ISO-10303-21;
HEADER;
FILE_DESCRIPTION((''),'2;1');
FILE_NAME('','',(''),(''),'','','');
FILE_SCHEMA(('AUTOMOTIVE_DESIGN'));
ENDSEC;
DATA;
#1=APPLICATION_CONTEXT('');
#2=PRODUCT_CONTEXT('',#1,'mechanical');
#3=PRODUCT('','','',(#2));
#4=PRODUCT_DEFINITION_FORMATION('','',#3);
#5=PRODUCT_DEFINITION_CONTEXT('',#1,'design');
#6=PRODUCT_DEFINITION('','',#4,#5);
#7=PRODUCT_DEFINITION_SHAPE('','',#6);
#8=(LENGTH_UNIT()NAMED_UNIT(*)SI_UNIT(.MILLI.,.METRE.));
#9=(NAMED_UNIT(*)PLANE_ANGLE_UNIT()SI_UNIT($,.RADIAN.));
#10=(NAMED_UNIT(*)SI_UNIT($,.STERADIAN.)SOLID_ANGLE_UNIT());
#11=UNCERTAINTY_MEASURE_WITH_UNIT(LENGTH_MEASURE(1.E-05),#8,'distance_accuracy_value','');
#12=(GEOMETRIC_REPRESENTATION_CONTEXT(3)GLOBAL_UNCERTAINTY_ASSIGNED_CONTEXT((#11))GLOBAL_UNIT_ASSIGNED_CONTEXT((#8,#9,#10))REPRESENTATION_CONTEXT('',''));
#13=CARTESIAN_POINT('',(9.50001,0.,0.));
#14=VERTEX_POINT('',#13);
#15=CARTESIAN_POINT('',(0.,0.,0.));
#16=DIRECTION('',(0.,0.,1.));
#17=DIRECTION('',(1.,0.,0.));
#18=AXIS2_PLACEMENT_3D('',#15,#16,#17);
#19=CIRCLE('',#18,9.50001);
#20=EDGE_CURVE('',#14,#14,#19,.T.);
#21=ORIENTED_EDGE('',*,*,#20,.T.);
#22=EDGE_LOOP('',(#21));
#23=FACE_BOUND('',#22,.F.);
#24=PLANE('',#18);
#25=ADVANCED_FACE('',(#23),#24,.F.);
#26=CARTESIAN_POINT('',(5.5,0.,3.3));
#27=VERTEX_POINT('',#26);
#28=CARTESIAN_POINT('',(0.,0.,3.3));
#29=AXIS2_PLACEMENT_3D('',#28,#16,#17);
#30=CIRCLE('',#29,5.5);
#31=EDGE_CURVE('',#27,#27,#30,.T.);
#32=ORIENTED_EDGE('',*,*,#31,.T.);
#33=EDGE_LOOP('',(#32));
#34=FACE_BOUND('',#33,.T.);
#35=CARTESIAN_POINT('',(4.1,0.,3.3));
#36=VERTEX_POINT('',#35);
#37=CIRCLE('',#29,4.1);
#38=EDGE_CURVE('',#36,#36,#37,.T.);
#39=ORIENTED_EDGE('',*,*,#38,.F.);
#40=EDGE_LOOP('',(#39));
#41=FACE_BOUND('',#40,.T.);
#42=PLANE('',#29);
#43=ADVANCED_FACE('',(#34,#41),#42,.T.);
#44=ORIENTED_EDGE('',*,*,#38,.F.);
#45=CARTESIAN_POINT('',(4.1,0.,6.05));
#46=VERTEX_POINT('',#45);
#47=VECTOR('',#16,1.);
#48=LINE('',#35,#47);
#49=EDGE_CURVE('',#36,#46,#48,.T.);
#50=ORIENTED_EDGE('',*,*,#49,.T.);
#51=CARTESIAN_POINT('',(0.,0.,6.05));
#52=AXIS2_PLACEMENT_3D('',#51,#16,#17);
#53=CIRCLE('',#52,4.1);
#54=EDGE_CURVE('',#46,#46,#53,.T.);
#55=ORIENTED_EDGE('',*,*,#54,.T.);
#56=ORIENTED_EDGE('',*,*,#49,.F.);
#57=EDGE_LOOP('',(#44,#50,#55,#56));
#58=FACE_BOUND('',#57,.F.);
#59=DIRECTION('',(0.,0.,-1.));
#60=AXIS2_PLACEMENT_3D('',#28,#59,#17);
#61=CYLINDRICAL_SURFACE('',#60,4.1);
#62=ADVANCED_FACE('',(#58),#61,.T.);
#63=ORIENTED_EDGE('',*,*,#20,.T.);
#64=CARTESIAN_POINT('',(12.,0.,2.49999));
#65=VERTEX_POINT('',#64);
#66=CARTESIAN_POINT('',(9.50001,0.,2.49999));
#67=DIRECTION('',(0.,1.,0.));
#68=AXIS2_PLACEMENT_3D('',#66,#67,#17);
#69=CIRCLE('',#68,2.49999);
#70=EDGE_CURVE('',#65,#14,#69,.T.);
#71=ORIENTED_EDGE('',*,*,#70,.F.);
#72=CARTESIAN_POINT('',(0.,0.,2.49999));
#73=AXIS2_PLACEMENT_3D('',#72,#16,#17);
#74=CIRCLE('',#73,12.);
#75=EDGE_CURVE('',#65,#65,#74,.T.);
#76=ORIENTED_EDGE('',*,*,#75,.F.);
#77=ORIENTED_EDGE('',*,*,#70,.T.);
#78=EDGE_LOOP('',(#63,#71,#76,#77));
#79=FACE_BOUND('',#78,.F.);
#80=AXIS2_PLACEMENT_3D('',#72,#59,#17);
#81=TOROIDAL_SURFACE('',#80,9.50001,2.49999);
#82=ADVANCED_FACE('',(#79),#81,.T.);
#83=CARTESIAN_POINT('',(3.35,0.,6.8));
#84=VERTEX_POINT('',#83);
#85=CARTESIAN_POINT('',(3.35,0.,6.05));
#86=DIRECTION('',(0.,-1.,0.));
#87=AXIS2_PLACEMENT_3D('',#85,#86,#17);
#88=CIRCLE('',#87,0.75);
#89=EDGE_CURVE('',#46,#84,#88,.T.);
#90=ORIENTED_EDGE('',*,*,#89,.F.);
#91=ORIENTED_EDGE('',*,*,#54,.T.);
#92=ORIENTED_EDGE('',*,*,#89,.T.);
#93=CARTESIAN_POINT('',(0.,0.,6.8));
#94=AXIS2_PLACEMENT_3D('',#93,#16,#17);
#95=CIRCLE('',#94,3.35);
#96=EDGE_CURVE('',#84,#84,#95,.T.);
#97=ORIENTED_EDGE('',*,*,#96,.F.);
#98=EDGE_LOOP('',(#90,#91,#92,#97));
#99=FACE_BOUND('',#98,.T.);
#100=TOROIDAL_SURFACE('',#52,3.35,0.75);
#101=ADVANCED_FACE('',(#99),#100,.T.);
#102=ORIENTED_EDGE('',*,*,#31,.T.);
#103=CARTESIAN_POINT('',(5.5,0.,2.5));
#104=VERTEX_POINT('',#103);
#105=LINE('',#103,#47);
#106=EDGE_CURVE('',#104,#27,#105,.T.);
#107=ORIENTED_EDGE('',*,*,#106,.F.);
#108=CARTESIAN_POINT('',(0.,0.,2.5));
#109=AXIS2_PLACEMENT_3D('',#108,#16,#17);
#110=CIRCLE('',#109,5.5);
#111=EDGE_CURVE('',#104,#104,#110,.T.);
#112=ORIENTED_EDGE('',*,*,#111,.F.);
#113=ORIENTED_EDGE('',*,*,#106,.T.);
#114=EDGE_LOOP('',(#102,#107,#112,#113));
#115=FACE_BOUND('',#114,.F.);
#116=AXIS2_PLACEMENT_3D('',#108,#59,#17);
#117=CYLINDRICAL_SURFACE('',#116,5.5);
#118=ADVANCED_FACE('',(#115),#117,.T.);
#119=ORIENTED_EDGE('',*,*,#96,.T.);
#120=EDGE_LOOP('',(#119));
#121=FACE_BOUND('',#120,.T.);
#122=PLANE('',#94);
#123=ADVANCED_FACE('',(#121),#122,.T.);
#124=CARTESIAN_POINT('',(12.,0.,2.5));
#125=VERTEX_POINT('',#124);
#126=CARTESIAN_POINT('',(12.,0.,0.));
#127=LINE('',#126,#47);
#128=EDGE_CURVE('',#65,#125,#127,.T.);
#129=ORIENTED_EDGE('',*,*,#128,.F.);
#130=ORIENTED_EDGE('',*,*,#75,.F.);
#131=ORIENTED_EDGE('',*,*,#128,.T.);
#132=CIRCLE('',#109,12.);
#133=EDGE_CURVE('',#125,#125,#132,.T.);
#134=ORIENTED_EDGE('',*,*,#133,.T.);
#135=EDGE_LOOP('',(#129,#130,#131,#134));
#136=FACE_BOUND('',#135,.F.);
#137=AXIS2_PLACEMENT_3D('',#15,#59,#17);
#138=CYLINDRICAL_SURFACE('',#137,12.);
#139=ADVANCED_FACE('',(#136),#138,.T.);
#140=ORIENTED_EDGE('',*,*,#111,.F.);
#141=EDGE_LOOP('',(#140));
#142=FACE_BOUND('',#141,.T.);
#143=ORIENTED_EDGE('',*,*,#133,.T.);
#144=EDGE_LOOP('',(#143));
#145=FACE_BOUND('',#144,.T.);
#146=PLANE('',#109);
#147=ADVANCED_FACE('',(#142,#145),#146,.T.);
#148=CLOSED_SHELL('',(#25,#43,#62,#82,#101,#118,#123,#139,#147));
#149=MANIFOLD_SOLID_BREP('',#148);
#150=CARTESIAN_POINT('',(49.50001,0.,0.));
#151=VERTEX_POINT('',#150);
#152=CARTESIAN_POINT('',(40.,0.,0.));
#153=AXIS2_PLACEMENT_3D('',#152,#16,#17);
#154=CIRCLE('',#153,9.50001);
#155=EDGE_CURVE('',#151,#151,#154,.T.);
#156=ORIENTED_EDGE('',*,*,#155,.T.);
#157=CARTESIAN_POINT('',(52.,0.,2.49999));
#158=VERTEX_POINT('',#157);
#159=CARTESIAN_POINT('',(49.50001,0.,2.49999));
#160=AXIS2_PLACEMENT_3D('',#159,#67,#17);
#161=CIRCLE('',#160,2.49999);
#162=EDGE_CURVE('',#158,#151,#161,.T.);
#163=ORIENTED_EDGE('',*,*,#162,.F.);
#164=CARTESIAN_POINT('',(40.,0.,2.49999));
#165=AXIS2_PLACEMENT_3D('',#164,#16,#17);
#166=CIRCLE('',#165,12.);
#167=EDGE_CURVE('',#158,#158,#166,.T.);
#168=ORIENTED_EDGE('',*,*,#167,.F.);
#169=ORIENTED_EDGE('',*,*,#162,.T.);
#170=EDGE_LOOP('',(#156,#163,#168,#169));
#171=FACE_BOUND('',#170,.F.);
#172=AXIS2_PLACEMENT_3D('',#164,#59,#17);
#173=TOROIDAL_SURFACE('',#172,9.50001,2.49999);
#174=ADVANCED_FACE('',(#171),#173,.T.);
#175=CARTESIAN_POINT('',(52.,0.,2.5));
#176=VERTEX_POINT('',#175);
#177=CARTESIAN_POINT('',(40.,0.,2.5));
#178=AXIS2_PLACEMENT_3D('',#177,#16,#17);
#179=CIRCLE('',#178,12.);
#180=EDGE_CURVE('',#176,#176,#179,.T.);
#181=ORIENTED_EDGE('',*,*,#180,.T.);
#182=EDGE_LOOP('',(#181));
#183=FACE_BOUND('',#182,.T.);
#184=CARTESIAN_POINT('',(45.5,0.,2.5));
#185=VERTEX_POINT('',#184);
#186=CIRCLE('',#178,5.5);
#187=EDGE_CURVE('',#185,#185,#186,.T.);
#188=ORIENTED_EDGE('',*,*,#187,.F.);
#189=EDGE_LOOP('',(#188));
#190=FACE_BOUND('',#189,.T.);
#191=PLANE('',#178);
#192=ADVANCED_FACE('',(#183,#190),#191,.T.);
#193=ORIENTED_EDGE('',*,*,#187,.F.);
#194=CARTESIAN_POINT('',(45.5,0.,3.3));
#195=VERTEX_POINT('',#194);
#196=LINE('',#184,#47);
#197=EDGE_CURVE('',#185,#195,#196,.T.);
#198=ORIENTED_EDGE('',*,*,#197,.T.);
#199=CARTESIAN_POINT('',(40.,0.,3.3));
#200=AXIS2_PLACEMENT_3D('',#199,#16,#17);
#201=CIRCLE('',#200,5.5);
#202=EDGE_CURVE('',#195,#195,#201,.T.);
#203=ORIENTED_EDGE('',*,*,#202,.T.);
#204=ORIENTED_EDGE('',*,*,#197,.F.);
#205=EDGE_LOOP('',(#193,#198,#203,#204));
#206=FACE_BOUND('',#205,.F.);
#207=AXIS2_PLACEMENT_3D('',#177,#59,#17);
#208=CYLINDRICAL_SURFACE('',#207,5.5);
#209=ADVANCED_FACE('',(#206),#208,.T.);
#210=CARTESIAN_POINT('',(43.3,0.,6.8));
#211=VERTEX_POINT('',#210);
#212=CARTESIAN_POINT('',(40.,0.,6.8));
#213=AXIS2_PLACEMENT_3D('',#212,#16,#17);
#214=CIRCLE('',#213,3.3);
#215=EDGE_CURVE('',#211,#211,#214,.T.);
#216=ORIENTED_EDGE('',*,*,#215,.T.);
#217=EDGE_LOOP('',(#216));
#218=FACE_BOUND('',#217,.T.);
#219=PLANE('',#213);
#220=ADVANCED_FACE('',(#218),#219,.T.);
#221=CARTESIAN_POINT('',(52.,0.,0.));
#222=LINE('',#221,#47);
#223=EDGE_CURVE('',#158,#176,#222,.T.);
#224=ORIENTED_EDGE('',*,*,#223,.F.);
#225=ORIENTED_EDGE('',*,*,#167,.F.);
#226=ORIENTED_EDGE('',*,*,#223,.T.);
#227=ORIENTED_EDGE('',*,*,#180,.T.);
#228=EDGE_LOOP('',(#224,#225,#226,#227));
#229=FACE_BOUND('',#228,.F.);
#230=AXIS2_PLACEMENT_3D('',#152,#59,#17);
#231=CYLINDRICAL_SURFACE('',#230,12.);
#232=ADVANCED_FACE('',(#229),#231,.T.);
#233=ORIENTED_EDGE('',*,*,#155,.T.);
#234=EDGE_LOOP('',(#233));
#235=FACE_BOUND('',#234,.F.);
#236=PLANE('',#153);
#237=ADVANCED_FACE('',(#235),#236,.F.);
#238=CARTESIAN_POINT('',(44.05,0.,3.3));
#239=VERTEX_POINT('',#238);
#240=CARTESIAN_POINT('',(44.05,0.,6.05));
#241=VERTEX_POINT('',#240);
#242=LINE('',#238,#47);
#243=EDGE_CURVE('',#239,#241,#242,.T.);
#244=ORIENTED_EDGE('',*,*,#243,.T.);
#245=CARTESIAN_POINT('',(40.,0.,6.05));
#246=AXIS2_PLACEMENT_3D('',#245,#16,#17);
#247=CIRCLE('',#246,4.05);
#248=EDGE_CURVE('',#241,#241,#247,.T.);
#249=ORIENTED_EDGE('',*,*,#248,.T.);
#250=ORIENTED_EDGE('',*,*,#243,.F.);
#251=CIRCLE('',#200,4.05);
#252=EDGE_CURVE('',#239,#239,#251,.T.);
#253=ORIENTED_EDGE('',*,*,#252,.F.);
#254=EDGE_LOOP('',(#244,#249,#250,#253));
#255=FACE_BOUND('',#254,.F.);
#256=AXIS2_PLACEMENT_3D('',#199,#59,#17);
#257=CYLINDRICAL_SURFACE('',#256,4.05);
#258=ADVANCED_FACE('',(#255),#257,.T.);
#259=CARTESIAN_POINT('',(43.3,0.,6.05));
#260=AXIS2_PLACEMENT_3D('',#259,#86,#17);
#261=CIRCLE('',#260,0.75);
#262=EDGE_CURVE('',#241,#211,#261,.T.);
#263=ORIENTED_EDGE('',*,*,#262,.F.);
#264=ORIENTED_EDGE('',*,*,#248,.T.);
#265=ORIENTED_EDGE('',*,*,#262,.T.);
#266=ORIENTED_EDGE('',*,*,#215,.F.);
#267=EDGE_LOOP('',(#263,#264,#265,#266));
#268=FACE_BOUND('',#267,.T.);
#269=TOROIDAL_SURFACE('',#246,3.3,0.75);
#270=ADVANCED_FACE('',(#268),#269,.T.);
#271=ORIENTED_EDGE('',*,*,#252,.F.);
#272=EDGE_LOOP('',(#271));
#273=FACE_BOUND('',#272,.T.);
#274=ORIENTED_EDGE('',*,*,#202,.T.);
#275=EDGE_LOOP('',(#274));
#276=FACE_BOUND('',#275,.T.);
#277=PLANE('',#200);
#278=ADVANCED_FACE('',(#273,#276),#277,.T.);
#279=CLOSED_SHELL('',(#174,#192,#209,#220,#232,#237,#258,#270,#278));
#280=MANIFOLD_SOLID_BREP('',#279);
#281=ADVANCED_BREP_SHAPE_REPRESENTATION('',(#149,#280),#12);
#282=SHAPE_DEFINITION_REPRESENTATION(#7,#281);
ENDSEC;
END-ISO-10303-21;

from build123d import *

# Parameters (mm, degrees)
F0_R     = 12
F1_DEPTH = 2.5
F2_R     = 5.5
F3_DEPTH = 0.8
F4_R     = 4.1
F5_DEPTH = 3.5
F4_R_2   = 4.05
F6_R     = 2.49999
F6_2_R   = 2.49999
F7_R     = 0.75
F7_2_R   = 0.75


# Not quite as in the source:
# - a fillet or chamfer is up to 0.001 mm smaller than in the source, because OpenCascade refuses the exact size


with BuildPart() as f1:
    # F0 (on Top) → F1 (new body)
    with BuildSketch(Plane.XY):
        Circle(F0_R)
    extrude(amount=F1_DEPTH)

    # F2 (on face) → F3 (join)
    with BuildSketch(Plane.XY.offset(2.5)):
        Circle(F2_R)
    extrude(amount=F3_DEPTH)

    # F4 (on face) → F5 (join)
    with BuildSketch(Plane.XY.offset(3.3)):
        Circle(F4_R)
    extrude(amount=F5_DEPTH)

    # F6 (radius 2.5 in the source; OpenCascade refuses exactly that, so slightly less here)
    f6_edges = [f1.edges().sort_by_distance(p)[0] for p in [
        (-12, 0, 0),
    ]]
    fillet(f6_edges, radius=F6_R)

    # F7
    f7_edges = [f1.edges().sort_by_distance(p)[0] for p in [
        (-4.1, 0, 6.8),
    ]]
    fillet(f7_edges, radius=F7_R)


with BuildPart() as f1b:
    # F0 (on Top) → F1, piece 2 (new body)
    with BuildSketch(Plane.XY):
        with Locations((40, 0)):
            Circle(F0_R)
    extrude(amount=F1_DEPTH)

    # F2 (on face) → F3, piece 2 (join)
    with BuildSketch(Plane.XY.offset(2.5)):
        with Locations((40, 0)):
            Circle(F2_R)
    extrude(amount=F3_DEPTH)

    # F4 (on face) → F5, piece 2 (join)
    with BuildSketch(Plane.XY.offset(3.3)):
        with Locations((40, 0)):
            Circle(F4_R_2)
    extrude(amount=F5_DEPTH)

    # F6#2 (radius 2.5 in the source; OpenCascade refuses exactly that, so slightly less here)
    f6_2_edges = [f1b.edges().sort_by_distance(p)[0] for p in [
        (28, 0, 0),
    ]]
    fillet(f6_2_edges, radius=F6_2_R)

    # F7#2
    f7_2_edges = [f1b.edges().sort_by_distance(p)[0] for p in [
        (35.95, 0, 6.8),
    ]]
    fillet(f7_2_edges, radius=F7_2_R)


solid = Compound([f1.part, f1b.part])
